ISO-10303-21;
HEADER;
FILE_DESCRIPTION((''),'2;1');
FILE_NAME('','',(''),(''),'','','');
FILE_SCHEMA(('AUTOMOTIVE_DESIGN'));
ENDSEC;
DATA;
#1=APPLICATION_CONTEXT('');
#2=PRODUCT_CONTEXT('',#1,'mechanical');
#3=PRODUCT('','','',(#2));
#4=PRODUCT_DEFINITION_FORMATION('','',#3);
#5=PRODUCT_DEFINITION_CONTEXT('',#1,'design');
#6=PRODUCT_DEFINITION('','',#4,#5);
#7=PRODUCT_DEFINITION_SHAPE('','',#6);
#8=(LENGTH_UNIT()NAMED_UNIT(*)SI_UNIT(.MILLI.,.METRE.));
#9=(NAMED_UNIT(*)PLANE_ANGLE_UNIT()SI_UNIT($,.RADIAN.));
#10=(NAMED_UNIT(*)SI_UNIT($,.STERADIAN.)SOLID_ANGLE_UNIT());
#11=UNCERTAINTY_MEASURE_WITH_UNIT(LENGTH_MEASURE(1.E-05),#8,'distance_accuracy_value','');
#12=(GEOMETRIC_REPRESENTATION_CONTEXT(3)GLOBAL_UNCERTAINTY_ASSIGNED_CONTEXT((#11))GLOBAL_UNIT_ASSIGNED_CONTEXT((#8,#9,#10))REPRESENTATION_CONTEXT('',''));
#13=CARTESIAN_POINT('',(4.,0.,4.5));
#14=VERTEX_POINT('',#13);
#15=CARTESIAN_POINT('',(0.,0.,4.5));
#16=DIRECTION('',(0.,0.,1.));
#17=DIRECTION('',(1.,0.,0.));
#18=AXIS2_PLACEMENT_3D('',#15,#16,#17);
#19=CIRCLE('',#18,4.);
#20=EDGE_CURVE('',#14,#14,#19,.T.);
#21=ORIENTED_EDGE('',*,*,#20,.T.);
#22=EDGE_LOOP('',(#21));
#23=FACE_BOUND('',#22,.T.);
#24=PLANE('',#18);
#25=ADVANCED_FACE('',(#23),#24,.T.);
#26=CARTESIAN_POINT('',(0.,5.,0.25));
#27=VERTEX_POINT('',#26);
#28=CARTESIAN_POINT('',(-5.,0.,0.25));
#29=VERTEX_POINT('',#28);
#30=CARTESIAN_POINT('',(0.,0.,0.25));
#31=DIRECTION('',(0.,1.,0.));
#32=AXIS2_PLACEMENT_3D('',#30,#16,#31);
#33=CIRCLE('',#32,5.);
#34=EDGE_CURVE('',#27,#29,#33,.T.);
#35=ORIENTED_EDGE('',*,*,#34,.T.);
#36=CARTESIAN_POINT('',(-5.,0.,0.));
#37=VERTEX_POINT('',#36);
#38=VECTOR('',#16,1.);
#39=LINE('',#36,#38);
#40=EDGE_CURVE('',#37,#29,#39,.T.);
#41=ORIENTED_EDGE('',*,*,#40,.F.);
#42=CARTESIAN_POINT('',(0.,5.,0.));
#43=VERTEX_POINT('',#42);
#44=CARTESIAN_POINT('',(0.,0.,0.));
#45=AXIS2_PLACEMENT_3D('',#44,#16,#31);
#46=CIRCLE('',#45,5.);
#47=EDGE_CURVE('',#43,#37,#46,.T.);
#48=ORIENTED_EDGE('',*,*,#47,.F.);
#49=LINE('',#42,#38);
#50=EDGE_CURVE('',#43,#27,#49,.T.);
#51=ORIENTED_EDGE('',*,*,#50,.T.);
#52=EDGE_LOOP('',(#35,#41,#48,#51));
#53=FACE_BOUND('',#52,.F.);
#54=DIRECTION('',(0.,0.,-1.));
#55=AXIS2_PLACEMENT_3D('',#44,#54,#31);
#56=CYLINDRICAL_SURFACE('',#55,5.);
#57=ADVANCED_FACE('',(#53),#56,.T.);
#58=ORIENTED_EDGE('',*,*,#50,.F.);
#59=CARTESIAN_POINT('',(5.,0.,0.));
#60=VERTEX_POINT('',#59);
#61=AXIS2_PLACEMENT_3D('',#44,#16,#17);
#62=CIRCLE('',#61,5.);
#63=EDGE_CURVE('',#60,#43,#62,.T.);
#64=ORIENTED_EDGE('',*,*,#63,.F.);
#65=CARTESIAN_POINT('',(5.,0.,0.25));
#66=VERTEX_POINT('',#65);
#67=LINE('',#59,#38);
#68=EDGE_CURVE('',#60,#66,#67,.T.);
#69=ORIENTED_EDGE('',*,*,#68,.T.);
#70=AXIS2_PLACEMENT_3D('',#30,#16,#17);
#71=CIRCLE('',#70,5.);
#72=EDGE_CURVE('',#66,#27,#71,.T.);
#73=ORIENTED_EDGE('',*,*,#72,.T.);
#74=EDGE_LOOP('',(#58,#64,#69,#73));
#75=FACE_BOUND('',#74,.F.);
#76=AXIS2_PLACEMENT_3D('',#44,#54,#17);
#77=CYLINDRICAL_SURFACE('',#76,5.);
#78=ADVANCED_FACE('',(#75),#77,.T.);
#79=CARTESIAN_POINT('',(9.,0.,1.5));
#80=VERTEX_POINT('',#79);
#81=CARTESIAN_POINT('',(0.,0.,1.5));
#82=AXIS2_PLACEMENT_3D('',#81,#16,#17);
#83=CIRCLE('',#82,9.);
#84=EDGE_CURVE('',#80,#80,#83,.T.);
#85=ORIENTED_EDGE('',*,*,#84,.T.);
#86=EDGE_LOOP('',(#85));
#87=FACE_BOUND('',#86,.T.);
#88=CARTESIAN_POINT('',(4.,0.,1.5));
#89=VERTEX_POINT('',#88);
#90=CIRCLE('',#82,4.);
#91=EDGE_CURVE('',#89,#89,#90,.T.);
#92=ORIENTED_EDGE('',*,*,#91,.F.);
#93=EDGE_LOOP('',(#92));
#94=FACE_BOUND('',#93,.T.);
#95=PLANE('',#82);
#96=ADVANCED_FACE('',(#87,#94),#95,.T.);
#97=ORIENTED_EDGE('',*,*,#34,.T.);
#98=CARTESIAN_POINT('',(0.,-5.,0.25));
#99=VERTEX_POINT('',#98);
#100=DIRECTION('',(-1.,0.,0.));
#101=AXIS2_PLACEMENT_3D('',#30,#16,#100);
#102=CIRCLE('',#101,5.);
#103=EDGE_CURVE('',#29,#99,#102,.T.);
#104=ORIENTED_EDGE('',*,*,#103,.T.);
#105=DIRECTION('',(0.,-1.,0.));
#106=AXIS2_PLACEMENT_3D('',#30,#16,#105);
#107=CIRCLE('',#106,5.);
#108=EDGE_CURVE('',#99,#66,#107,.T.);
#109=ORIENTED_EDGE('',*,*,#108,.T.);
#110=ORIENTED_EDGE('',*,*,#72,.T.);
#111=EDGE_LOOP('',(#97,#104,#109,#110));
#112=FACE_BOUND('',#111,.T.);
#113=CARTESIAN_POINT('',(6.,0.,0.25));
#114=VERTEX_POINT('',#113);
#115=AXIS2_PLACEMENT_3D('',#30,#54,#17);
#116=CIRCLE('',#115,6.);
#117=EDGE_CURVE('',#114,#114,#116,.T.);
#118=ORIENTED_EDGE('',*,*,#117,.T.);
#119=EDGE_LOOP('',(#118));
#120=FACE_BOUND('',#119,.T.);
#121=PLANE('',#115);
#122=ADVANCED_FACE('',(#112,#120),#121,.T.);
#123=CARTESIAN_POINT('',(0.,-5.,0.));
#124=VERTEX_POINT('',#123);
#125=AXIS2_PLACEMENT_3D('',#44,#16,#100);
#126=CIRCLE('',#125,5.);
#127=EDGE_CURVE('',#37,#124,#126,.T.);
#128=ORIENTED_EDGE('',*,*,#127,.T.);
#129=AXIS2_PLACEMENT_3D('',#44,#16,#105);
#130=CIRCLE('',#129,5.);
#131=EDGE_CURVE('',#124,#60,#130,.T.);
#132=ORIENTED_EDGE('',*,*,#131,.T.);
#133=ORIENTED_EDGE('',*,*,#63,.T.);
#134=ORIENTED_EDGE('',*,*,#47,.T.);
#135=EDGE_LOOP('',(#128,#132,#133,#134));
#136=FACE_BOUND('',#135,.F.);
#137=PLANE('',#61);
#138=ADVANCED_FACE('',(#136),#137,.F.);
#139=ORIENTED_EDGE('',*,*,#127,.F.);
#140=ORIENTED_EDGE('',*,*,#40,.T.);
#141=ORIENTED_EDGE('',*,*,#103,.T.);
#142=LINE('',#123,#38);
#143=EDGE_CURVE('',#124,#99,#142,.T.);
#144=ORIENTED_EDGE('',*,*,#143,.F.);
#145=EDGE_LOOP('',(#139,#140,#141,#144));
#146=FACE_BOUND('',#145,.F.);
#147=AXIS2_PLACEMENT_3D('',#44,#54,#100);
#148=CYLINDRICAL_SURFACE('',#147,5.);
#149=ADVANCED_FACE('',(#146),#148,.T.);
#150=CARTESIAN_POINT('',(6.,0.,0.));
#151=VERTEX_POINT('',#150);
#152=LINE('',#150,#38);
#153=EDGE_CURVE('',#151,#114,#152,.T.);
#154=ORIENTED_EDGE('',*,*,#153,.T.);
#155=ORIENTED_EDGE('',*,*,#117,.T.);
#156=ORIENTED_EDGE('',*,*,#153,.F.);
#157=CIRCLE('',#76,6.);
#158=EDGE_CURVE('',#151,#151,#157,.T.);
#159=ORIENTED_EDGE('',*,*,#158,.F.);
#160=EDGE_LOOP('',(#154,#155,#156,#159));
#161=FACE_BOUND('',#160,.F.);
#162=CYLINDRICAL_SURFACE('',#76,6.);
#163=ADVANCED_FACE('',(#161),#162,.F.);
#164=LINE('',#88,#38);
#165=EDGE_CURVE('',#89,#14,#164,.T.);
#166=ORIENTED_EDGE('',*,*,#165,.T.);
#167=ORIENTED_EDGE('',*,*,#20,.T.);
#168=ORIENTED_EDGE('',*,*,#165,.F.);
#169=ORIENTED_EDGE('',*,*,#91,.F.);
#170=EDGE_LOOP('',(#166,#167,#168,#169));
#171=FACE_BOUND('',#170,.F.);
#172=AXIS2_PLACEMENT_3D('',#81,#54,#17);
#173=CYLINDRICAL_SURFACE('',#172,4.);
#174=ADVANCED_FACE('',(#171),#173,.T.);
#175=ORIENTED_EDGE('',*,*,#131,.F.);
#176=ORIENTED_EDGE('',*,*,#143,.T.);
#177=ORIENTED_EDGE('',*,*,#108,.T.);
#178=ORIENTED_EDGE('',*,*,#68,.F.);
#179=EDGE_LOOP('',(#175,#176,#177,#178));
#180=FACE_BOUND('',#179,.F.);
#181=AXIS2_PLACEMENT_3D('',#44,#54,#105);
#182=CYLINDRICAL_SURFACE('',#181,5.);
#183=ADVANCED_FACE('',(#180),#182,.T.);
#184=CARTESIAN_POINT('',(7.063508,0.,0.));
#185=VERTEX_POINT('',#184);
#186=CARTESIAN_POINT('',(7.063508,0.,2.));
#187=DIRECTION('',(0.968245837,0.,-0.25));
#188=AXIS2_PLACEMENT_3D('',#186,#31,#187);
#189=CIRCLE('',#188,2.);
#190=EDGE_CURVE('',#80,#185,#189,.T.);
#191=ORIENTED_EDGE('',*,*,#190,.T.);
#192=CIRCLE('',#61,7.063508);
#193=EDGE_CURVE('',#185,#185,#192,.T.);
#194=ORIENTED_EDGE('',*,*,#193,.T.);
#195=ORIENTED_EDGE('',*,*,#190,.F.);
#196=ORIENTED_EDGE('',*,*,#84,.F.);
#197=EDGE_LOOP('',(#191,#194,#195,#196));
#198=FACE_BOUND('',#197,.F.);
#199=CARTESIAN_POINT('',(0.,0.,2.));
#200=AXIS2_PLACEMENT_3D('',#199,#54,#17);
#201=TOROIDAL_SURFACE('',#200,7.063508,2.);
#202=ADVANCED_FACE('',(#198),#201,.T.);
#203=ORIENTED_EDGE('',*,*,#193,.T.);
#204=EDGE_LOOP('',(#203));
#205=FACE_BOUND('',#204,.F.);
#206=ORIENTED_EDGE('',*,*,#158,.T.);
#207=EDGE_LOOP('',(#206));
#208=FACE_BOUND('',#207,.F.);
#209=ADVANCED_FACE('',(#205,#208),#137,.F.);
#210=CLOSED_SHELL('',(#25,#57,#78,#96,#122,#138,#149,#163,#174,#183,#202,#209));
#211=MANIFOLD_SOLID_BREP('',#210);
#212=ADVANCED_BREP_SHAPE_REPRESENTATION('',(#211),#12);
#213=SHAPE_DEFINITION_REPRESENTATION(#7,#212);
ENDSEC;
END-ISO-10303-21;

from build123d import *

# Parameters (mm, degrees)
F0_R     = 9
F1_DEPTH = 1.5
F2_R     = 4
F3_DEPTH = 3
F5_R     = 6
F6_DEPTH = 0.25


# Not quite as in the source:
# - a fillet or chamfer that OpenCascade refuses, or shapes differently, is made with other operations: its cross-section is extruded or revolved along the edge and cut away or added


with BuildPart() as f1:
    # F0 (on Top) → F1 (new body)
    with BuildSketch(Plane.XY):
        Circle(F0_R)
    extrude(amount=F1_DEPTH)

    # F2 (on face) → F3 (join)
    with BuildSketch(Plane.XY.offset(1.5)):
        Circle(F2_R)
    extrude(amount=F3_DEPTH)

    # F4: fillet of radius 2 on 1 edges, made by hand

    # F4_s1 → F4_t2 (revolve, cut)
    with BuildSketch(Plane.XZ):
        with BuildLine():
            ThreePointArc((9, 1.5), (8.2882531983, 0.4188611699), (7.0635083269, 0))
            Line((7.0635083269, 0), (9, 0))
            Line((9, 0), (9, 1.5))
        make_face()
    revolve(axis=Axis((0, 0, 0), (0, 0, 1)), mode=Mode.SUBTRACT)

    # F5 (on face) → F6 (cut)
    with BuildSketch(Plane(origin=(0, 0, 0), x_dir=(1, 0, 0), z_dir=(0, 0, -1))):
        Circle(F5_R)
        with BuildLine():
            ThreePointArc((0, 5), (3.5355339059, 3.5355339059), (5, 0))
            ThreePointArc((5, 0), (3.5355339059, -3.5355339059), (0, -5))
            ThreePointArc((0, -5), (-3.5355339059, -3.5355339059), (-5, 0))
            ThreePointArc((-5, 0), (-3.5355339059, 3.5355339059), (0, 5))
        make_face(mode=Mode.SUBTRACT)
    extrude(amount=-F6_DEPTH, mode=Mode.SUBTRACT)


solid = f1.part
